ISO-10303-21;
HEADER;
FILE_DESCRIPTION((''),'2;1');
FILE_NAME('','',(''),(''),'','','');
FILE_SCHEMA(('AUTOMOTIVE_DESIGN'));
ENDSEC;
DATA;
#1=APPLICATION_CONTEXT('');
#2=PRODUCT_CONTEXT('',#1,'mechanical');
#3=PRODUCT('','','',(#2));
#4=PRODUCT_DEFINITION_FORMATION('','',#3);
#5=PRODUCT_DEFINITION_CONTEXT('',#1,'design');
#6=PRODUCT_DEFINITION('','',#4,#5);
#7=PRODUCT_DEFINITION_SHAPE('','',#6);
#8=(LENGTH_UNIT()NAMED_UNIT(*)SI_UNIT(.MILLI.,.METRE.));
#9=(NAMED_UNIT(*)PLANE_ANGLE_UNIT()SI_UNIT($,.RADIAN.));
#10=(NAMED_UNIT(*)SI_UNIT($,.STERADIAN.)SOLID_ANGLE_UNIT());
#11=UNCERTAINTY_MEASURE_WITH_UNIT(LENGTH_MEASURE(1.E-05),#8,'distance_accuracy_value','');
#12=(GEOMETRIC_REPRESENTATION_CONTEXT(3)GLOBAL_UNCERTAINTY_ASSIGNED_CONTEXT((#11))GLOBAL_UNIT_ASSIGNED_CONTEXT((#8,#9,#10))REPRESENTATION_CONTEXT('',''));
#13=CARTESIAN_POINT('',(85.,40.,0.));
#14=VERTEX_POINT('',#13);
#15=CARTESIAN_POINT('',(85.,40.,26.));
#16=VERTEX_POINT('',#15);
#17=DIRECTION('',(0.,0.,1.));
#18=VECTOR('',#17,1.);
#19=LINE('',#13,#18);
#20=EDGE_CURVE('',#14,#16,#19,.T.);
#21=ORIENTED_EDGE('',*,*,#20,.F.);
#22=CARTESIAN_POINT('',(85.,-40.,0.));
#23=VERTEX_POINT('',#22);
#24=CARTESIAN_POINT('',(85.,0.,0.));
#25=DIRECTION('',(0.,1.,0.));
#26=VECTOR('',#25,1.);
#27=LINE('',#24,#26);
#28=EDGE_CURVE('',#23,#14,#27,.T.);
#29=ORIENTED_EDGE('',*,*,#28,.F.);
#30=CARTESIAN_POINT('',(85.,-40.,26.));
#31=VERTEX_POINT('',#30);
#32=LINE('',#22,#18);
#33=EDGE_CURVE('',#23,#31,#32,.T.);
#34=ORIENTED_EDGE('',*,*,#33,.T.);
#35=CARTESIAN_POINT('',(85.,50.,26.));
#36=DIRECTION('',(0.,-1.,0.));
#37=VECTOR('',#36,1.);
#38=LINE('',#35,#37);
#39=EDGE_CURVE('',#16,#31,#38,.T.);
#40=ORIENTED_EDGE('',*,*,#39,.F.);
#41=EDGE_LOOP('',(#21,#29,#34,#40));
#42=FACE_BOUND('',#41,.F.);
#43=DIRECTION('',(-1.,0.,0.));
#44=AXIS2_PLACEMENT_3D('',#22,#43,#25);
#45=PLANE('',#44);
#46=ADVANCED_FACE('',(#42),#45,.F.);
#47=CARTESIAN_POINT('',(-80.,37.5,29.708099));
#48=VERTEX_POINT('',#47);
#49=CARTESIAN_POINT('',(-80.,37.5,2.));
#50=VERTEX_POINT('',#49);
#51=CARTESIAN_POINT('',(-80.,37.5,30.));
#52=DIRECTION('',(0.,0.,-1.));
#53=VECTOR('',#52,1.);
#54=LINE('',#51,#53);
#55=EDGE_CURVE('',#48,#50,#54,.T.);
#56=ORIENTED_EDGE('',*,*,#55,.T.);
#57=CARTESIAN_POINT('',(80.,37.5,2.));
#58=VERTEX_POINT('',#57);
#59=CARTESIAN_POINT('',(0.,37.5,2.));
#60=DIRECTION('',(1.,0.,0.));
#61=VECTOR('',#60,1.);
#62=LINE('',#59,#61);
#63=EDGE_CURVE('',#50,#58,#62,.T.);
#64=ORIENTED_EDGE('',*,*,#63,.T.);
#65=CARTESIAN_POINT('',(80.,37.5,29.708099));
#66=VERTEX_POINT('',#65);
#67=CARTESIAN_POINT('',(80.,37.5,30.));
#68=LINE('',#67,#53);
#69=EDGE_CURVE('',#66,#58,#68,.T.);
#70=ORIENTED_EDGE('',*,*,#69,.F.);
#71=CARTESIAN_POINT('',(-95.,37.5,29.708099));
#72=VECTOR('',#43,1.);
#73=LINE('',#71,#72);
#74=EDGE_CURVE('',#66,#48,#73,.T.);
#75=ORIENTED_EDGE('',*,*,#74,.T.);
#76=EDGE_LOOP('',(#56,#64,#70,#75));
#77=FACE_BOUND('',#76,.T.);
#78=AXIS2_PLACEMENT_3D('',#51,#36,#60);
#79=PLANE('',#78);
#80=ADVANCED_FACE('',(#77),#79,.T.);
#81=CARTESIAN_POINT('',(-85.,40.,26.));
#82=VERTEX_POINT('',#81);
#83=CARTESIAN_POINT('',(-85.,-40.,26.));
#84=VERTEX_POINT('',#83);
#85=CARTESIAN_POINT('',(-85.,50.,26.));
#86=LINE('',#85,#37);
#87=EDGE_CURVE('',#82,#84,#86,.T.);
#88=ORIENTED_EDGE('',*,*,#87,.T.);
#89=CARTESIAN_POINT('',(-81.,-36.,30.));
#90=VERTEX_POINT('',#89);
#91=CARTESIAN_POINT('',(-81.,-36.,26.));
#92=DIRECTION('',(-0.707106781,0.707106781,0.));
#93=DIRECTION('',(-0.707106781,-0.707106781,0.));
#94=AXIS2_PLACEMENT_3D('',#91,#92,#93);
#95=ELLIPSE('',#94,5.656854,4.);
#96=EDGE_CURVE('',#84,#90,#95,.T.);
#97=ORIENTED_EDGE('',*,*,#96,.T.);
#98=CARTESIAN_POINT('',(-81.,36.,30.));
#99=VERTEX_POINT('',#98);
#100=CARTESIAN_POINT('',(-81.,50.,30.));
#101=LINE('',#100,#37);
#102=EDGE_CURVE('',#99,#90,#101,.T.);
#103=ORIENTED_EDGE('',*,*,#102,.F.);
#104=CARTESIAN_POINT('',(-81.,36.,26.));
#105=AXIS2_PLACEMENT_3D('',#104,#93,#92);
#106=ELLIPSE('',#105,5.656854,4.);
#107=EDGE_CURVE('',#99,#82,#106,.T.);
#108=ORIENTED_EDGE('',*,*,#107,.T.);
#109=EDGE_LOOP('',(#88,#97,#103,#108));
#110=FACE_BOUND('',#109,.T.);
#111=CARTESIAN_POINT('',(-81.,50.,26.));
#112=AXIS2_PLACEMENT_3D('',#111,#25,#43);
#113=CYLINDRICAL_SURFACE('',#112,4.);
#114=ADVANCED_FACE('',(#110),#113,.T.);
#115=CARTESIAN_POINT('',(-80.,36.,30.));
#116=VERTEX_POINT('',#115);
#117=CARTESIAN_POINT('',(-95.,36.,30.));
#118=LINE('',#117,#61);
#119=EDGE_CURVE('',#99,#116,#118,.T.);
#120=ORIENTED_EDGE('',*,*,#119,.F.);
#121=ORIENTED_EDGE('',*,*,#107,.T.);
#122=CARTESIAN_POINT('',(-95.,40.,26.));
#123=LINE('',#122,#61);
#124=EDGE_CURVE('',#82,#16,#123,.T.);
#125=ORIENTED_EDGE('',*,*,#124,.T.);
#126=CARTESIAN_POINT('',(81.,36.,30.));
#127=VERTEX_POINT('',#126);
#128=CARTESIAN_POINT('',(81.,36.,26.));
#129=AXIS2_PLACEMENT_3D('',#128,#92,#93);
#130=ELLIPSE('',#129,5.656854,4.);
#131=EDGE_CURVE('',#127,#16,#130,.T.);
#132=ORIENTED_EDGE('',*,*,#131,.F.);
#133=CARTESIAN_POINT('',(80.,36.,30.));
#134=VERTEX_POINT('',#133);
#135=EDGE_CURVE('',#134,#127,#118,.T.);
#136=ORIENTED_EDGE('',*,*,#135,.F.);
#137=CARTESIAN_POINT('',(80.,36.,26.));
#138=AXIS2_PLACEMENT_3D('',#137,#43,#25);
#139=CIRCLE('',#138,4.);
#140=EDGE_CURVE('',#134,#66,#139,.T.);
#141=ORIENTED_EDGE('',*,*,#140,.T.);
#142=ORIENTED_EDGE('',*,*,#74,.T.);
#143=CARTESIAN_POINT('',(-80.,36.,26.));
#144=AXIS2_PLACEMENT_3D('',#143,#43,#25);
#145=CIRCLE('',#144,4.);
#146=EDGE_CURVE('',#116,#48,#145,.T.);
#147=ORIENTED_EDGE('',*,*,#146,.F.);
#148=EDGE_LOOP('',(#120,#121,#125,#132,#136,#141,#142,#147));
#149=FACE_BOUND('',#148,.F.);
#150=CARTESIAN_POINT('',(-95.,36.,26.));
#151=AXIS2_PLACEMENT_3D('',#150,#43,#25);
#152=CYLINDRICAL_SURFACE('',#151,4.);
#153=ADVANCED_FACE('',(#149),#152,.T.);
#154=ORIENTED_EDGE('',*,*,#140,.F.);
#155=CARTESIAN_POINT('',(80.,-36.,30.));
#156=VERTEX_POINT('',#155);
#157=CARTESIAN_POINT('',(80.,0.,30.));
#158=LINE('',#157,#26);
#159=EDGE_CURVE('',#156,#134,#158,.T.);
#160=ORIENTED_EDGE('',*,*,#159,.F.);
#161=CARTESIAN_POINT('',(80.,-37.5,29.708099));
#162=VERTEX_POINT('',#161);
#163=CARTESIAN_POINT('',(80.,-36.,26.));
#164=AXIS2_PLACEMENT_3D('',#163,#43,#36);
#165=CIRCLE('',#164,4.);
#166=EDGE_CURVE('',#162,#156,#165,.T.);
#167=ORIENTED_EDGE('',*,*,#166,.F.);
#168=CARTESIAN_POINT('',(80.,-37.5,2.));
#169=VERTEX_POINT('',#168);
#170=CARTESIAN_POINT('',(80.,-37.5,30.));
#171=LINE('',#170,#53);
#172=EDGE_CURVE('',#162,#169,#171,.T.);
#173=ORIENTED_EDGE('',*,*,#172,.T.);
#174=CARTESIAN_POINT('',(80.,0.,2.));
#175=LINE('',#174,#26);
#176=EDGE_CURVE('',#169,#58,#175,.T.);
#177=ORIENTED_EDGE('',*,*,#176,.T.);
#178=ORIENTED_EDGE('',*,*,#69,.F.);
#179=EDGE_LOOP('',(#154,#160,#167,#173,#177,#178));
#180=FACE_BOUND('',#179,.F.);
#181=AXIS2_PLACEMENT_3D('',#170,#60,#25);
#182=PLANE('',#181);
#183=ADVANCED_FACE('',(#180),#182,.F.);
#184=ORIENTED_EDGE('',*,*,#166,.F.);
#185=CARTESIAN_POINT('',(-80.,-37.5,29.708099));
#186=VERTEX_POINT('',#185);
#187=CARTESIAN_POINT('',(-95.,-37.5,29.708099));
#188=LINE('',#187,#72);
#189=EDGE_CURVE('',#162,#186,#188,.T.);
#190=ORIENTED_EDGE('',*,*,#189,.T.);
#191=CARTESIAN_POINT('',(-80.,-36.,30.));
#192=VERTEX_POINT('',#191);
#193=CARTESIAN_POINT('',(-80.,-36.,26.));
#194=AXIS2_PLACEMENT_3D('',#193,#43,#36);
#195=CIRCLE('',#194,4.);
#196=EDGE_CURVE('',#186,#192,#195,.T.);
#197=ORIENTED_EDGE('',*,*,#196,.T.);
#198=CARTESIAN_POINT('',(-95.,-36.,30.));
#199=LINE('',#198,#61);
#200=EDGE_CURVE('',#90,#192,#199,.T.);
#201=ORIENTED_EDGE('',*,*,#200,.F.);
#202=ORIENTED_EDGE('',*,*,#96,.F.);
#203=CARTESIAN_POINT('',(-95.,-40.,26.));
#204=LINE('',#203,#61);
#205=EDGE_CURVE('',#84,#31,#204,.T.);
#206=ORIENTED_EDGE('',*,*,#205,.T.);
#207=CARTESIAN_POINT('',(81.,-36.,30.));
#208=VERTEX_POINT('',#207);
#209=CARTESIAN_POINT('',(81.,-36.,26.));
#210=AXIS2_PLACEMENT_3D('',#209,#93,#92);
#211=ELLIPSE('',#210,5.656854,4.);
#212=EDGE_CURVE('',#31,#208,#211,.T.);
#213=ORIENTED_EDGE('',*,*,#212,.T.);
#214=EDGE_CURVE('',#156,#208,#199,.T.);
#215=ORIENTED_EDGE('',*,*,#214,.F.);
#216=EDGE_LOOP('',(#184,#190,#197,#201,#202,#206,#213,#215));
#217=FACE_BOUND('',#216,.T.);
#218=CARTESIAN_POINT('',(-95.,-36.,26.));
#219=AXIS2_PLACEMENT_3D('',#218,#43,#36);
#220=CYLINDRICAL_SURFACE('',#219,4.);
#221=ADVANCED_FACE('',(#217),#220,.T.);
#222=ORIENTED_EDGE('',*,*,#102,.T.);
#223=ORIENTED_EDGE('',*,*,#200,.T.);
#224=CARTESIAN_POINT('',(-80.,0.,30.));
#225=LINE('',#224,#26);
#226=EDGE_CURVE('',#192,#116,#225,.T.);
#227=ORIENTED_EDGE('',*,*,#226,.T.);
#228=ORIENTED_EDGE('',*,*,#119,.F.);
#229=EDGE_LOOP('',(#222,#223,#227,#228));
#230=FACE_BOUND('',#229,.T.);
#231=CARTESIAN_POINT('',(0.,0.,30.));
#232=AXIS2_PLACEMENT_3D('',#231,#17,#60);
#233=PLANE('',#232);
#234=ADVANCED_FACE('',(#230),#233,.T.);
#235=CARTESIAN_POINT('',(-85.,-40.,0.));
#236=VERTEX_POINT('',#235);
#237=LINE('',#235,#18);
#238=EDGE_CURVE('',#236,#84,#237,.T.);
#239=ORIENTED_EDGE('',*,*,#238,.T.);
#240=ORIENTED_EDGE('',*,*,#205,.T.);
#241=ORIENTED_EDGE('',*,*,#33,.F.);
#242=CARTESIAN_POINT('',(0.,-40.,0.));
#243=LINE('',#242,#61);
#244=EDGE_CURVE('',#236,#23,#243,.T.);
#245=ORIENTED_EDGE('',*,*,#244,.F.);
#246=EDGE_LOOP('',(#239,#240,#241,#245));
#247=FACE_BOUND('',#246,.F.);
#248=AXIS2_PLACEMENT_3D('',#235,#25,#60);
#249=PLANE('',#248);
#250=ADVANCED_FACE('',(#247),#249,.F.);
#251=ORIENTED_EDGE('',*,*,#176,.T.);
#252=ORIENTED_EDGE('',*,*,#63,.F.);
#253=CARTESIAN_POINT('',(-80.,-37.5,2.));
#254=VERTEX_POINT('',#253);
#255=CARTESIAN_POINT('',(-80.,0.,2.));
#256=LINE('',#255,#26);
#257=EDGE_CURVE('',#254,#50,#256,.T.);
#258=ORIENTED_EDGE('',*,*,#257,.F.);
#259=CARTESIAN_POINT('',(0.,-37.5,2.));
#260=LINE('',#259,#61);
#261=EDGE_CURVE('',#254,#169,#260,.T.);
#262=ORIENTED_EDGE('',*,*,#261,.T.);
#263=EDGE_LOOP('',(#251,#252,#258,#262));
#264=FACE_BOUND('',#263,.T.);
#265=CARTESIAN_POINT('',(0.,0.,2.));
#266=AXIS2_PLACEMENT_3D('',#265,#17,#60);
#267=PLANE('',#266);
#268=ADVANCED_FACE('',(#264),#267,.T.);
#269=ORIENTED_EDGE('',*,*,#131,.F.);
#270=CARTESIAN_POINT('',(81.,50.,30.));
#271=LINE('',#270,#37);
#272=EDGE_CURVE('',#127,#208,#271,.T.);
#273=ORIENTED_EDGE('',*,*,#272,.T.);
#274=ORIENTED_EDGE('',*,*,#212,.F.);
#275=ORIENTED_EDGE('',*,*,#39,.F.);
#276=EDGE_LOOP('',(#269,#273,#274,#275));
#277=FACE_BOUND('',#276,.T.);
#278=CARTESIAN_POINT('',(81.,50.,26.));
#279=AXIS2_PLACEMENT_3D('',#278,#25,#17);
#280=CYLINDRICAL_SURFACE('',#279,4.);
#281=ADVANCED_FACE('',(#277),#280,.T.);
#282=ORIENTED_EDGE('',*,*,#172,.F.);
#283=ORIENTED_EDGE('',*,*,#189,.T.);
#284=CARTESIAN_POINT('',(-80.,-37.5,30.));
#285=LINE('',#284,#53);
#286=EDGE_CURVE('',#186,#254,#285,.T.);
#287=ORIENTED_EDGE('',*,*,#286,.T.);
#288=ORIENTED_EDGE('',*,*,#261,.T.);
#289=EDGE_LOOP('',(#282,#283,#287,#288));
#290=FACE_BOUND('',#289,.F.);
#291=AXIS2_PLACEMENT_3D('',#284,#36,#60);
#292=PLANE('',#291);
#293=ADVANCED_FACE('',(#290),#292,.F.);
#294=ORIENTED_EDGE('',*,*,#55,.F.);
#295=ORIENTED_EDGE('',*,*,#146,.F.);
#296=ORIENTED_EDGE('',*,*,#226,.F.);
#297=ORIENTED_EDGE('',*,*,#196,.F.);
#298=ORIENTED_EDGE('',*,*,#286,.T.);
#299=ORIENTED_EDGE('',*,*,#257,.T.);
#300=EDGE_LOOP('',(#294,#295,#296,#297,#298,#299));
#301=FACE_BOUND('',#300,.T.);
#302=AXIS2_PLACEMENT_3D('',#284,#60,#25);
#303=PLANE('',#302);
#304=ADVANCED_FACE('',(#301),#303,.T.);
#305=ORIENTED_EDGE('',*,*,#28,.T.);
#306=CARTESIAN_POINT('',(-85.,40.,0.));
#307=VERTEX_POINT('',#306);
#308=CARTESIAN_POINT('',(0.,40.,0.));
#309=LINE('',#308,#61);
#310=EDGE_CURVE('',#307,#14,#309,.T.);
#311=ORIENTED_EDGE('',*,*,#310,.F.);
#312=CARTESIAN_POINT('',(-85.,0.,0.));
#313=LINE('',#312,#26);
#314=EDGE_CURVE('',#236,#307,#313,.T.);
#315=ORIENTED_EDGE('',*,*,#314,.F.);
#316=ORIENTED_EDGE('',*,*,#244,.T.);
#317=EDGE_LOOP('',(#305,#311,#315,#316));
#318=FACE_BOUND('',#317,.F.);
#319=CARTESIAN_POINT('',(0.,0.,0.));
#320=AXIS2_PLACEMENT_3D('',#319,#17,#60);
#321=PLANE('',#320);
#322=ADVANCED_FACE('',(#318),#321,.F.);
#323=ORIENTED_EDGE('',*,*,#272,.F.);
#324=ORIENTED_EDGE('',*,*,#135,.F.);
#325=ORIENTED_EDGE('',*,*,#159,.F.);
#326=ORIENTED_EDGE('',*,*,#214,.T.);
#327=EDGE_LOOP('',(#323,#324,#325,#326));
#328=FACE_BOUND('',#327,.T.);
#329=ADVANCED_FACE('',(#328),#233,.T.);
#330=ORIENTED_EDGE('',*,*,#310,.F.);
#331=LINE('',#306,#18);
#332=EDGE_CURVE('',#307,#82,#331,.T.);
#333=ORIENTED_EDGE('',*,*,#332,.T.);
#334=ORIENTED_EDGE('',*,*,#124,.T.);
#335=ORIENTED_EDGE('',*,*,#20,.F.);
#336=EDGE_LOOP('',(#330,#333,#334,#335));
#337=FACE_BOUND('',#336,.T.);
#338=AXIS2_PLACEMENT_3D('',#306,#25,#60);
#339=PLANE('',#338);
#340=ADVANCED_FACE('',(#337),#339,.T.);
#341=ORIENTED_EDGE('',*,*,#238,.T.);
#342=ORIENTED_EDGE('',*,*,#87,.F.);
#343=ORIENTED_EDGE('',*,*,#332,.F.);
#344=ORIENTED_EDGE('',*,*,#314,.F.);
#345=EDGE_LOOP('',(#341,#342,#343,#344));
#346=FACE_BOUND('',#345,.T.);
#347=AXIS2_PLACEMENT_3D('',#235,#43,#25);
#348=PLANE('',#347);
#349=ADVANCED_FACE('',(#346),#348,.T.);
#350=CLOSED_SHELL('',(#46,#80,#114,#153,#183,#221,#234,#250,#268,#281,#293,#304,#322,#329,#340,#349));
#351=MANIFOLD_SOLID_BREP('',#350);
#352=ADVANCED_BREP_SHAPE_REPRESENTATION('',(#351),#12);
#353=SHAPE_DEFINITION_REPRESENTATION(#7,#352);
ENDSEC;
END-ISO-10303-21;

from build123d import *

# Parameters (mm, degrees)
F0_W        = 170
F0_H        = 80
F1_DEPTH    = 30
F2_W        = 160
F2_H        = 75
F3_DEPTH    = 28
F4_T1_DEPTH = 190
F4_T3_DEPTH = 100


# Not quite as in the source:
# - a fillet or chamfer that OpenCascade refuses, or shapes differently, is made with other operations: its cross-section is extruded or revolved along the edge and cut away or added


with BuildPart() as f1:
    # F0 (on Top) → F1 (new body)
    with BuildSketch(Plane.XY):
        Rectangle(F0_W, F0_H)
    extrude(amount=F1_DEPTH)

    # F2 (on face) → F3 (cut)
    with BuildSketch(Plane.XY.offset(30)):
        Rectangle(F2_W, F2_H)
    extrude(amount=-F3_DEPTH, mode=Mode.SUBTRACT)

    # F4: fillet of radius 4 on 4 edges, made by hand

    # F4_s2 → F4_t1 (cut)
    with BuildSketch(Plane.YZ.offset(-95)):
        with BuildLine():
            ThreePointArc((-40, 26), (-38.8284271247, 28.8284271247), (-36, 30))
            Line((-36, 30), (-40, 30))
            Line((-40, 30), (-40, 26))
        make_face()
        with BuildLine():
            ThreePointArc((40, 26), (38.8284271247, 28.8284271247), (36, 30))
            Line((36, 30), (40, 30))
            Line((40, 30), (40, 26))
        make_face()
    extrude(amount=F4_T1_DEPTH, mode=Mode.SUBTRACT)

    # F4_s4 → F4_t3 (cut)
    with BuildSketch(Plane.XZ.offset(-50)):
        with BuildLine():
            ThreePointArc((-85, 26), (-83.8284271247, 28.8284271247), (-81, 30))
            Line((-81, 30), (-85, 30))
            Line((-85, 30), (-85, 26))
        make_face()
        with BuildLine():
            ThreePointArc((81, 30), (83.8284271247, 28.8284271247), (85, 26))
            Line((85, 26), (85, 30))
            Line((85, 30), (81, 30))
        make_face()
    extrude(amount=F4_T3_DEPTH, mode=Mode.SUBTRACT)


solid = f1.part
